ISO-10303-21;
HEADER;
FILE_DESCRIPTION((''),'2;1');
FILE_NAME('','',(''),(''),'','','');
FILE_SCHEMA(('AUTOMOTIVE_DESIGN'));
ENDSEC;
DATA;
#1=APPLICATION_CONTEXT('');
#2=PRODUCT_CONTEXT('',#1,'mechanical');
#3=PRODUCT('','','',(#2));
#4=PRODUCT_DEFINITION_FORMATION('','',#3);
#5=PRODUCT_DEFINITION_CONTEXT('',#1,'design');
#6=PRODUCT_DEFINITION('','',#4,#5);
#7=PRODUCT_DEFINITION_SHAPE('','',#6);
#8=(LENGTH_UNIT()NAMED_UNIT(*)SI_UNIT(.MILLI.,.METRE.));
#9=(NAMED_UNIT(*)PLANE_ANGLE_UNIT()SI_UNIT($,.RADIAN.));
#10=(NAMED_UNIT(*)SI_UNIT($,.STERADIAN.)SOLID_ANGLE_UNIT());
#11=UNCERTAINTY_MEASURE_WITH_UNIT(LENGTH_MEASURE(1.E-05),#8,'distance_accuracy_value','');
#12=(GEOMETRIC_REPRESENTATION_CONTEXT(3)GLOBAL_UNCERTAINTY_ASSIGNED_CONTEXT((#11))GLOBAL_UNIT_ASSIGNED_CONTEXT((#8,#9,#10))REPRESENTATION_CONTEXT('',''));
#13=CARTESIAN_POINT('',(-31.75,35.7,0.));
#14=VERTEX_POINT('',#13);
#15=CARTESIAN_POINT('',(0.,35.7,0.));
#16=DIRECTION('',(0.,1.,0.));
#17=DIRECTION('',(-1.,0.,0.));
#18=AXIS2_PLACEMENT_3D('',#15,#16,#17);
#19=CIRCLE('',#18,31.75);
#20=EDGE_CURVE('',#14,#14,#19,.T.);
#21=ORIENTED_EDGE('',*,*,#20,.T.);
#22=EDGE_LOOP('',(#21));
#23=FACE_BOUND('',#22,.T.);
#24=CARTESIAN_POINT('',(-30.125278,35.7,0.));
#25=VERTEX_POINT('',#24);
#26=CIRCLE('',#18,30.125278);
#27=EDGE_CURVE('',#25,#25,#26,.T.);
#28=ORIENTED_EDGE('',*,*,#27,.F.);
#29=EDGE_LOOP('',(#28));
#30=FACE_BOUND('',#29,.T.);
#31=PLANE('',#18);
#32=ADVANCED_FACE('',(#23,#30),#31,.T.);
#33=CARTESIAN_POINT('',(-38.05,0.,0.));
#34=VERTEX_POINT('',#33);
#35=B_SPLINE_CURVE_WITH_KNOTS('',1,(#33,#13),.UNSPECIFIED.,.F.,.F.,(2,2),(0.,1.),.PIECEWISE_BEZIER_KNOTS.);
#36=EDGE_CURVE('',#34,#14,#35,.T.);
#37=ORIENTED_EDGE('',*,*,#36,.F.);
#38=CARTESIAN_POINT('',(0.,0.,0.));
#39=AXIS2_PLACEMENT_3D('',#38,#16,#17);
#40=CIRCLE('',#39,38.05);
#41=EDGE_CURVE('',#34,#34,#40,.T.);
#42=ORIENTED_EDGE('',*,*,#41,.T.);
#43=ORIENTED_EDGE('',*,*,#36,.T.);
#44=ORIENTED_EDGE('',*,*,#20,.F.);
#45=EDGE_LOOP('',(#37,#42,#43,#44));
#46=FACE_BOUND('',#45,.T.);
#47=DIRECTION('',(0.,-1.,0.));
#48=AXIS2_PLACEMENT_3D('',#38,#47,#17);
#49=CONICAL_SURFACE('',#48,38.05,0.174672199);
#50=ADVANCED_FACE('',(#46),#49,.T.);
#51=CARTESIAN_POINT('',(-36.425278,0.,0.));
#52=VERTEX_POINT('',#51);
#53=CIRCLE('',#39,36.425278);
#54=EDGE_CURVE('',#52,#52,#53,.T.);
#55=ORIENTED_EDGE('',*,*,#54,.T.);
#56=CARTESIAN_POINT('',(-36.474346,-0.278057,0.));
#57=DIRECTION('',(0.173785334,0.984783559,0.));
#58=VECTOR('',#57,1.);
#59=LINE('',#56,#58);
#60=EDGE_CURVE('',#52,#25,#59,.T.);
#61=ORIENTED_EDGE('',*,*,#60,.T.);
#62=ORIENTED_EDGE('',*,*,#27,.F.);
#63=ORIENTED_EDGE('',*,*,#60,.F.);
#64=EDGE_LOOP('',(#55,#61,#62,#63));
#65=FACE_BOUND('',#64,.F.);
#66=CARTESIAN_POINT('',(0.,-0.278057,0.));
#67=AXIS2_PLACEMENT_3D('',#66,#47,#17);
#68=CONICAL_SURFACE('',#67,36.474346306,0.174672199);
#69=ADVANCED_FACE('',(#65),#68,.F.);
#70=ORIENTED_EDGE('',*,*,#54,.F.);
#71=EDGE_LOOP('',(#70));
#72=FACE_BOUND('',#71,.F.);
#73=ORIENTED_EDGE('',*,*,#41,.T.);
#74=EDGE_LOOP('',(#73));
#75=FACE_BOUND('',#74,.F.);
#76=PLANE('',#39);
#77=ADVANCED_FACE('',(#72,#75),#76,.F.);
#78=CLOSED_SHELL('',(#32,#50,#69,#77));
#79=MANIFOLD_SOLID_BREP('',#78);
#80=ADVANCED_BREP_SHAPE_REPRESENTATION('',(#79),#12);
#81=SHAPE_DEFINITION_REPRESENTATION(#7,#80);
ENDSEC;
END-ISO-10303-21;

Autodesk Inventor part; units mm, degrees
ref_plane "YZ Plane" through (0, 0, 0) normal (1, 0, 0) x (0, 1, 0)
ref_plane "XY Plane" through (0, 0, 0) normal (0, 0, 1) x (1, 0, 0)
sketch "Szkic6" plane through (0, 0, 0) normal (0, 1, 0) x (-1, 0, 0)
  circle A0 centre (0, 0) radius 38.05
  dimension "d33" = 76.1
ref_plane "Płaszczyzna konstrukcyjna1" through (0, 35.7, 0) normal (0, 1, 0) x (-1, 0, 0)
sketch "Szkic7" plane through (0, 35.7, 0) normal (0, 1, 0) x (-1, 0, 0)
  circle A0 centre (0, 0) radius 31.75
  dimension "d35" = 63.5
loft "Wyciągnięcie złożone1" add profiles "Szkic6", "Szkic7"
shell "Skorupa1" thickness 1.6 removed faces 2 at (14.3997, 35.7, 5.5289) at (-5.8996, 0, 7.9079)
equation "\"d33\" = OD1"
equation "\"d35\" = OD2"
equation "\"d52\" = THK"
equation "\"SzerokośćGięciaPodcięcia\" = Grubość"
equation "\"RozmiarPodcięciaNarożnika\" = 4 * Grubość"
equation "\"PromieńPrzejścia\" = PromieńGięcia"
equation "\"Rozmiar_promienia_Jacobiego\" = PromieńGięcia"
equation "\"Wielk_odstępu\" = Grubość"
equation "\"d2\" = PromieńGięcia"
equation "\"d23\" = PromieńGięcia"
equation "\"OD1\" = 76.1"
equation "\"OD2\" = 63.5"
equation "\"L\" = 35.7"
equation "\"THK\" = 1.6"
equation "\"d34\" = L"
equation "\"Grubość\" = 1.5"
equation "\"PromieńGięcia\" = 3"
properties part number "Redukcja symetryczna Ø76,1x63,5x1,6 L=35,7" material "304"
